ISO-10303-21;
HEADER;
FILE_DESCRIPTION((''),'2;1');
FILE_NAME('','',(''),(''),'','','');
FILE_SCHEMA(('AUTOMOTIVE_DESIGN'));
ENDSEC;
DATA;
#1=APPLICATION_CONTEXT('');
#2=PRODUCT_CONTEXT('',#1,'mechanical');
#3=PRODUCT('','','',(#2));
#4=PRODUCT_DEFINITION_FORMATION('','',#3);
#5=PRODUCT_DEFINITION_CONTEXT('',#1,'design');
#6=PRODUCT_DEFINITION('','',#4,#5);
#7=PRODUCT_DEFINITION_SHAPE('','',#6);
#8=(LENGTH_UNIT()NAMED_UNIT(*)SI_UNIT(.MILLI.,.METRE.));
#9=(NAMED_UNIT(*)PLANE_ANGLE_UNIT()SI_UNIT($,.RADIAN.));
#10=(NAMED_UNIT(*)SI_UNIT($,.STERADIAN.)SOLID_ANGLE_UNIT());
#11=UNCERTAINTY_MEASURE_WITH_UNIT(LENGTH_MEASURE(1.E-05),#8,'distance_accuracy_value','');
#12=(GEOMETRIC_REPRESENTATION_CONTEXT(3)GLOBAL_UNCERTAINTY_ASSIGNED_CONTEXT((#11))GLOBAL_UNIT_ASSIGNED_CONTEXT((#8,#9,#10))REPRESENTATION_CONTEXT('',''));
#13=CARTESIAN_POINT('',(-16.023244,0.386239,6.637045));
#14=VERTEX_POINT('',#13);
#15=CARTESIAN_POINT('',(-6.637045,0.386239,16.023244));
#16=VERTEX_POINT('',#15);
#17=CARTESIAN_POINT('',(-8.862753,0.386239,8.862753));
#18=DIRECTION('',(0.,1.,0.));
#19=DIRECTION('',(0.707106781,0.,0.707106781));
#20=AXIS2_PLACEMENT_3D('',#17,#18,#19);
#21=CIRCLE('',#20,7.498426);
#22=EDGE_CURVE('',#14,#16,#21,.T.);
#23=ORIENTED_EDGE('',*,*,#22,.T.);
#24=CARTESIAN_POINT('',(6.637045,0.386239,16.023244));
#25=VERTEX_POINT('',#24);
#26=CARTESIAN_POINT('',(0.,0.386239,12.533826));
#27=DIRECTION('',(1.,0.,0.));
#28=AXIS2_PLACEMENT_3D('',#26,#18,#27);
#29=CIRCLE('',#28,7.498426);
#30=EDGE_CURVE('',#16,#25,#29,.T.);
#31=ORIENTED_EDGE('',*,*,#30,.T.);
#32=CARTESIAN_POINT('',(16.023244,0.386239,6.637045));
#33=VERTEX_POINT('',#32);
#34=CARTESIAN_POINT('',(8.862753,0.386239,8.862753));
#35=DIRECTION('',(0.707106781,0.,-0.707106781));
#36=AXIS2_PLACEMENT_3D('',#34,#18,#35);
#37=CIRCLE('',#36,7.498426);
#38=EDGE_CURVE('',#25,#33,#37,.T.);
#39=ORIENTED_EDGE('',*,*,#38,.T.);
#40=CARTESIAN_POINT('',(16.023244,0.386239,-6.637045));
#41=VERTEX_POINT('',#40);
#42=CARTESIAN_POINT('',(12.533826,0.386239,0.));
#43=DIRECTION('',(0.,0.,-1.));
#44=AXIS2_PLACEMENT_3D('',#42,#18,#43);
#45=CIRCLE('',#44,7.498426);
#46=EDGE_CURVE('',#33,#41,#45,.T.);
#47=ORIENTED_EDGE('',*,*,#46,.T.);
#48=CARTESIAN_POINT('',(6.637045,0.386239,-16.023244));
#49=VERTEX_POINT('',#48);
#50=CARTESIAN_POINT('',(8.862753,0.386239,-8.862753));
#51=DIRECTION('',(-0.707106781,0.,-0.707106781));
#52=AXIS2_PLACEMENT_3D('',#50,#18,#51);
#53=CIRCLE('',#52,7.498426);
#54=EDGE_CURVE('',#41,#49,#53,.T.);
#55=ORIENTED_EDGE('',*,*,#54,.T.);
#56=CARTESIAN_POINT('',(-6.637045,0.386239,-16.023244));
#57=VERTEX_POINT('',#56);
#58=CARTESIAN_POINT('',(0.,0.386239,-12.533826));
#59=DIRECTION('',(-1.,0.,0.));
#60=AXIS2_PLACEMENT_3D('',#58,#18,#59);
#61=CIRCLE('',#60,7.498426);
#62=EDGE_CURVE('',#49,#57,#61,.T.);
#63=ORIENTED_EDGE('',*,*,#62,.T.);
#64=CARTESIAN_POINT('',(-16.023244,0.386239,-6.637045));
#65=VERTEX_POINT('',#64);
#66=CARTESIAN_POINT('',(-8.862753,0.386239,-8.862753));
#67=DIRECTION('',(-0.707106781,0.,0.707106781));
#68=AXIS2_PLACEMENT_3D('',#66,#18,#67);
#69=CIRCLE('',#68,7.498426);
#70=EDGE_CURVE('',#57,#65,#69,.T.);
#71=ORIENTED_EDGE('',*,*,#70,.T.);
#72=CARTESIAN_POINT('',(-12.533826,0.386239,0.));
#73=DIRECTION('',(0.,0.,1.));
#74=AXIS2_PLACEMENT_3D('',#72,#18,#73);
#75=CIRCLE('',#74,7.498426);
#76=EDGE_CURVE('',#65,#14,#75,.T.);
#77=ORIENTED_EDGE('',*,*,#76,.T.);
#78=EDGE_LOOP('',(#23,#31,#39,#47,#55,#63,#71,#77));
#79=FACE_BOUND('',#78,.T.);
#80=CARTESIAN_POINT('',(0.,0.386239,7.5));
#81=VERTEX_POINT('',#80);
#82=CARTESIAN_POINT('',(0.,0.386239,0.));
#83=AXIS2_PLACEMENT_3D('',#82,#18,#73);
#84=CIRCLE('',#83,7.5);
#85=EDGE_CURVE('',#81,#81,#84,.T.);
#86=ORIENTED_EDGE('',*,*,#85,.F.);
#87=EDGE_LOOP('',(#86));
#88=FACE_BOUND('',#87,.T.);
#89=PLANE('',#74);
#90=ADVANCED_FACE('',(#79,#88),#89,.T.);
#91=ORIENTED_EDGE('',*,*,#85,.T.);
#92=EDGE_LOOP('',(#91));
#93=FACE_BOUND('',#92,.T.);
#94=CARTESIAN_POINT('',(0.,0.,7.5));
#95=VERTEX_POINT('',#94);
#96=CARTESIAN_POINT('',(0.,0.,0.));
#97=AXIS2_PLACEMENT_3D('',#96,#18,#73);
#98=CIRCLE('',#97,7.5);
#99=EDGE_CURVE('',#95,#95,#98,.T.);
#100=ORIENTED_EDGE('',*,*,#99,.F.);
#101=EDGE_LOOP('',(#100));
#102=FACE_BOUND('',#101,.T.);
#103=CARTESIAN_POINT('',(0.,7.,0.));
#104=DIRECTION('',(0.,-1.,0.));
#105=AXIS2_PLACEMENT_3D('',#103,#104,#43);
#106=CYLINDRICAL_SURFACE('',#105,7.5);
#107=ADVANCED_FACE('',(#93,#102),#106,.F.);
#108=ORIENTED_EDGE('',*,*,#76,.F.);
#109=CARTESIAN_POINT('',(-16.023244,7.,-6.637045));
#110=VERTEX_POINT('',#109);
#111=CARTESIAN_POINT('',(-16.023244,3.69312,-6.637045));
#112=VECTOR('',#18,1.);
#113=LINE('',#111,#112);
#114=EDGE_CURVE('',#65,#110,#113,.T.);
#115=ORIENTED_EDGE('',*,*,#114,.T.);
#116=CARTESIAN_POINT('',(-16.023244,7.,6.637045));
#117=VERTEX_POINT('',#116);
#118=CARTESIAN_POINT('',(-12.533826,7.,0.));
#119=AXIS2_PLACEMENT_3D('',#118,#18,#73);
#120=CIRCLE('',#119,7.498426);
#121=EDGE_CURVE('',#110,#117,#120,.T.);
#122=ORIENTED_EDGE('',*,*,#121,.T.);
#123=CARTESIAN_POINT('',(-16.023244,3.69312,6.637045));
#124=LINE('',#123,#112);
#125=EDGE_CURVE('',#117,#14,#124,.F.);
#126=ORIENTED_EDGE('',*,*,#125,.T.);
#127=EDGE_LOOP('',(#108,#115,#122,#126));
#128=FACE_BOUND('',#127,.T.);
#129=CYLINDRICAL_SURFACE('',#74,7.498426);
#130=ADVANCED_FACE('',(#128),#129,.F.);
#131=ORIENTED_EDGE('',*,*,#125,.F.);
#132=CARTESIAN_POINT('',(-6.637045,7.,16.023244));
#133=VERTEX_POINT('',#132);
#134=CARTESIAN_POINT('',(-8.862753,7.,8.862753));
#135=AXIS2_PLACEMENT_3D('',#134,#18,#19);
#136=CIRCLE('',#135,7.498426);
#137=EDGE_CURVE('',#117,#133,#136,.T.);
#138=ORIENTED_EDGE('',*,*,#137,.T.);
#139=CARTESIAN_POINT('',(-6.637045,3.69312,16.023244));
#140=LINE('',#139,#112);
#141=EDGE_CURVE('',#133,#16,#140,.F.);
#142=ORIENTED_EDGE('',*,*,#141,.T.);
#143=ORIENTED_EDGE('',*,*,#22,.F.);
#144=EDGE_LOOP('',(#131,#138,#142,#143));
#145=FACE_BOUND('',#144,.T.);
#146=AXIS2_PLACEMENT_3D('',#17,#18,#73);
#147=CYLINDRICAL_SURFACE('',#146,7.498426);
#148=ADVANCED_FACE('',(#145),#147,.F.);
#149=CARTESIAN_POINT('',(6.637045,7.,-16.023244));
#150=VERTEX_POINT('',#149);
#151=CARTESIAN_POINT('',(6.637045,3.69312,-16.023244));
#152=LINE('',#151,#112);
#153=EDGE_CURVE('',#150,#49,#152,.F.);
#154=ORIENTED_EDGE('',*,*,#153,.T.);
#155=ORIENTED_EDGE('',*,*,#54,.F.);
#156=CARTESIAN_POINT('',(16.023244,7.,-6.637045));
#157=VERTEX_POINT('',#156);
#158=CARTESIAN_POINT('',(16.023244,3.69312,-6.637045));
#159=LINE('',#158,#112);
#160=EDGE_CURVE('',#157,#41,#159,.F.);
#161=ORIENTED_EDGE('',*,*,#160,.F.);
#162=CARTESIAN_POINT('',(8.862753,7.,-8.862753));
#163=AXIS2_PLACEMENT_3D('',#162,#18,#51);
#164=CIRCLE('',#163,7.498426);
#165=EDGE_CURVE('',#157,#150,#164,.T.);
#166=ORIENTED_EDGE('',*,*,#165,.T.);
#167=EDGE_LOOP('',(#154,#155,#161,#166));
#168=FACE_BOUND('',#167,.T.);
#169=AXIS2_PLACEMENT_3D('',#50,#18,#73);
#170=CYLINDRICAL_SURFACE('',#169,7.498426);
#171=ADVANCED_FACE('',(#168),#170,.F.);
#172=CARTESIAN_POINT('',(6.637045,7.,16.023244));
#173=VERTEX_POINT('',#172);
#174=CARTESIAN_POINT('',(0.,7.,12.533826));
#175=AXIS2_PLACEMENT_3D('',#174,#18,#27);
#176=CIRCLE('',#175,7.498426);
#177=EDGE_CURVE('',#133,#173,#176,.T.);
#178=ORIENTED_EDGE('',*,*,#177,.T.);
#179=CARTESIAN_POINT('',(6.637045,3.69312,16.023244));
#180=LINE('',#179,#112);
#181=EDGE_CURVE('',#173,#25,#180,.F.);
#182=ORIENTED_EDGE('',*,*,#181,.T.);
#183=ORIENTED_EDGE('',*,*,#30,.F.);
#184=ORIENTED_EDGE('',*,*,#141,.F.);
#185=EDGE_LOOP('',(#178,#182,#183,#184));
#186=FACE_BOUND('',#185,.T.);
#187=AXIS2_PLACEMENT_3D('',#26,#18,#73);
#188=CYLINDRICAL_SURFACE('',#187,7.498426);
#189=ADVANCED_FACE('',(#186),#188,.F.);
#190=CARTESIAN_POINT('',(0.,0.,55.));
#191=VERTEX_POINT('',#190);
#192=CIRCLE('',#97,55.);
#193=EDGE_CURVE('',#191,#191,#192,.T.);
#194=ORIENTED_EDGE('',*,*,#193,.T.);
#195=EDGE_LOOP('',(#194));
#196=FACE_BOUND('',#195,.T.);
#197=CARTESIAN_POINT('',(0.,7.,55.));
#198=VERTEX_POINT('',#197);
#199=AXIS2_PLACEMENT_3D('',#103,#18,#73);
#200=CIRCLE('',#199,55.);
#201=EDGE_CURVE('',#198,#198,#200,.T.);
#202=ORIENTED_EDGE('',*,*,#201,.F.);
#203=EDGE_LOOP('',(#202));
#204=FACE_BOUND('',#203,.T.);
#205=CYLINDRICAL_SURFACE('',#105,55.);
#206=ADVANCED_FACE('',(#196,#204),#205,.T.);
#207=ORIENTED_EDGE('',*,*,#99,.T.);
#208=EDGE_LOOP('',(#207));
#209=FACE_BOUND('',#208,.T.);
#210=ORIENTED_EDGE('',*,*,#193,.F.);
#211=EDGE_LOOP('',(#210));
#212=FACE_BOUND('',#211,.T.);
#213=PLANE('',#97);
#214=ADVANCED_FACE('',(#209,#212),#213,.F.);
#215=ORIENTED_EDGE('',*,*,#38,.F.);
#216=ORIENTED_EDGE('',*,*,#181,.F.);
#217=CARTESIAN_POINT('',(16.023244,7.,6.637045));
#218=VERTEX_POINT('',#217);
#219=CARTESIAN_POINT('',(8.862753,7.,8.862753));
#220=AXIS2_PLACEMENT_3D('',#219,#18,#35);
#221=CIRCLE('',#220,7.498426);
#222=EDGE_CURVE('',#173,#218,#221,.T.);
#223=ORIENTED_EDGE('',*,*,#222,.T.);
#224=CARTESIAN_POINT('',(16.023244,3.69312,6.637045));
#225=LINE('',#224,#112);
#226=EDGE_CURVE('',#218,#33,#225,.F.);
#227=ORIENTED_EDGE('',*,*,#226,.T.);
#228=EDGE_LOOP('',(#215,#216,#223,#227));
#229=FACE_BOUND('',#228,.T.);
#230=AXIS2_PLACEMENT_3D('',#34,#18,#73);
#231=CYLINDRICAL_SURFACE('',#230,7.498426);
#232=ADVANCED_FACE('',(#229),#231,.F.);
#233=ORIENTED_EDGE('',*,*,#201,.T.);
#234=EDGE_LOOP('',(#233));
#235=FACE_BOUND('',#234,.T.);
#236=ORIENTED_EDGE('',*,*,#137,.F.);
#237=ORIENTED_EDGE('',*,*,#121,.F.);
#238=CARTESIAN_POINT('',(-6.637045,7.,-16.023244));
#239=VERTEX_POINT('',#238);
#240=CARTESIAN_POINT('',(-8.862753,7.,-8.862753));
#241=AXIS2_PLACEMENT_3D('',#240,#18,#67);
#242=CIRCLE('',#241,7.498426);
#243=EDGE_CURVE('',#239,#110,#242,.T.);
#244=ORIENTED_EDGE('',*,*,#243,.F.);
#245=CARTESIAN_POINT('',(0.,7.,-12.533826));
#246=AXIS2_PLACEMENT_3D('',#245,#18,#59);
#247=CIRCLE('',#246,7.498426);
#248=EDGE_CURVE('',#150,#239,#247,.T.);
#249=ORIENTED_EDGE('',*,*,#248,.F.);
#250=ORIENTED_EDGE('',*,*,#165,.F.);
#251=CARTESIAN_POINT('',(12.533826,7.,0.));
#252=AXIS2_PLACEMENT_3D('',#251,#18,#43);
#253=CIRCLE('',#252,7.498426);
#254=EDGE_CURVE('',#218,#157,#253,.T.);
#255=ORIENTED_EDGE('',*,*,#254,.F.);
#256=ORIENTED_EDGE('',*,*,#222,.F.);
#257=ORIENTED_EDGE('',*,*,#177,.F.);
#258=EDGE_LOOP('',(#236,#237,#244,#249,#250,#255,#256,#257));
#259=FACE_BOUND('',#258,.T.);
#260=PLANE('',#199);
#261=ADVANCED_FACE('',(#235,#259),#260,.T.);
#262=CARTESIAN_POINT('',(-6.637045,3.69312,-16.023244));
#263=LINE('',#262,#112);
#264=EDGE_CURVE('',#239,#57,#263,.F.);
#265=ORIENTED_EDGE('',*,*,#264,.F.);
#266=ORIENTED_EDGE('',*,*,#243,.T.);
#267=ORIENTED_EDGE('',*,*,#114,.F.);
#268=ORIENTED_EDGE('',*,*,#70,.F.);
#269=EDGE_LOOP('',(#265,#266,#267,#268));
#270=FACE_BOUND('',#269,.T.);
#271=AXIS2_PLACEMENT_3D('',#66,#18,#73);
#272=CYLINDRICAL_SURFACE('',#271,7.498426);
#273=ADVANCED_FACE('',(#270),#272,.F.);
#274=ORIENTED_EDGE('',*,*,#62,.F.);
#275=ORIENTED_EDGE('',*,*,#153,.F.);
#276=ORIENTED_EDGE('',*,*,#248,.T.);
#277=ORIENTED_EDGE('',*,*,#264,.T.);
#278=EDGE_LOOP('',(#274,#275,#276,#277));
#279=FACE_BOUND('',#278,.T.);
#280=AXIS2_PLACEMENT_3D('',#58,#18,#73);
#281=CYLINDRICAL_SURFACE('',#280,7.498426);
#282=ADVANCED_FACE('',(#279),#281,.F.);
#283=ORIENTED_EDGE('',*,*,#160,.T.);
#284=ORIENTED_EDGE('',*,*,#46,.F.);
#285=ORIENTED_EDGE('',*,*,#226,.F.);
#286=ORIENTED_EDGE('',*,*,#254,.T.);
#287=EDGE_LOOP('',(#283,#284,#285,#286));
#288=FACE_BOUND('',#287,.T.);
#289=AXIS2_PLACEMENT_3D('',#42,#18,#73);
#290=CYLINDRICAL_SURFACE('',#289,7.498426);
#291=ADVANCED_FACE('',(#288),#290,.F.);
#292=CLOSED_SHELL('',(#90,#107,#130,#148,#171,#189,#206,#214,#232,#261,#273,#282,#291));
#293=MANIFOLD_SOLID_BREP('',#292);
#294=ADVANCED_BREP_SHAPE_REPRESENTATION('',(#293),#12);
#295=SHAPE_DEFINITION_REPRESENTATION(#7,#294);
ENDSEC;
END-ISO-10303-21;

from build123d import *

# Parameters (mm, degrees)
SKETCH1_R           = 55
BOSS_EXTRUDE1_DEPTH = 7
SKETCH2_R           = 7.5
CUT_EXTRUDE1_DEPTH  = 79.096094653
SKETCH3_R           = 7.498426304
CUT_EXTRUDE2_DEPTH  = 6.613760509
CIRPATTERN1_COUNT   = 8


with BuildPart() as part:
    # Sketch1 → Boss-Extrude1 (new body)
    with BuildSketch(Plane(origin=(0, 0, 0), x_dir=(1, 0, 0), z_dir=(0, 1, 0))):
        Circle(SKETCH1_R)
    extrude(amount=BOSS_EXTRUDE1_DEPTH)

    # Sketch2 → Cut-Extrude1 (cut, through all)
    with BuildSketch(Plane(origin=(0, 0, 0), x_dir=(1, 0, 0), z_dir=(0, 1, 0))):
        Circle(SKETCH2_R)
    extrude(amount=CUT_EXTRUDE1_DEPTH, mode=Mode.SUBTRACT)

    # Sketch3 → Cut-Extrude2 (cut)
    with BuildSketch(Plane(origin=(0, 7, 0), x_dir=(1, 0, 0), z_dir=(0, 1, 0))):
        with Locations((-12.533826151, 0)):
            Circle(SKETCH3_R)
    cut_extrude2 = extrude(amount=-CUT_EXTRUDE2_DEPTH, mode=Mode.SUBTRACT)

    # CirPattern1: Cut-Extrude2 ×8 about axis
    cirpattern1_axis = Axis((0, 0, 0), (0, 1, 0))
    for i in range(1, CIRPATTERN1_COUNT):
        add(cut_extrude2.rotate(cirpattern1_axis, i * 360 / CIRPATTERN1_COUNT), mode=Mode.SUBTRACT)


solid = part.part
